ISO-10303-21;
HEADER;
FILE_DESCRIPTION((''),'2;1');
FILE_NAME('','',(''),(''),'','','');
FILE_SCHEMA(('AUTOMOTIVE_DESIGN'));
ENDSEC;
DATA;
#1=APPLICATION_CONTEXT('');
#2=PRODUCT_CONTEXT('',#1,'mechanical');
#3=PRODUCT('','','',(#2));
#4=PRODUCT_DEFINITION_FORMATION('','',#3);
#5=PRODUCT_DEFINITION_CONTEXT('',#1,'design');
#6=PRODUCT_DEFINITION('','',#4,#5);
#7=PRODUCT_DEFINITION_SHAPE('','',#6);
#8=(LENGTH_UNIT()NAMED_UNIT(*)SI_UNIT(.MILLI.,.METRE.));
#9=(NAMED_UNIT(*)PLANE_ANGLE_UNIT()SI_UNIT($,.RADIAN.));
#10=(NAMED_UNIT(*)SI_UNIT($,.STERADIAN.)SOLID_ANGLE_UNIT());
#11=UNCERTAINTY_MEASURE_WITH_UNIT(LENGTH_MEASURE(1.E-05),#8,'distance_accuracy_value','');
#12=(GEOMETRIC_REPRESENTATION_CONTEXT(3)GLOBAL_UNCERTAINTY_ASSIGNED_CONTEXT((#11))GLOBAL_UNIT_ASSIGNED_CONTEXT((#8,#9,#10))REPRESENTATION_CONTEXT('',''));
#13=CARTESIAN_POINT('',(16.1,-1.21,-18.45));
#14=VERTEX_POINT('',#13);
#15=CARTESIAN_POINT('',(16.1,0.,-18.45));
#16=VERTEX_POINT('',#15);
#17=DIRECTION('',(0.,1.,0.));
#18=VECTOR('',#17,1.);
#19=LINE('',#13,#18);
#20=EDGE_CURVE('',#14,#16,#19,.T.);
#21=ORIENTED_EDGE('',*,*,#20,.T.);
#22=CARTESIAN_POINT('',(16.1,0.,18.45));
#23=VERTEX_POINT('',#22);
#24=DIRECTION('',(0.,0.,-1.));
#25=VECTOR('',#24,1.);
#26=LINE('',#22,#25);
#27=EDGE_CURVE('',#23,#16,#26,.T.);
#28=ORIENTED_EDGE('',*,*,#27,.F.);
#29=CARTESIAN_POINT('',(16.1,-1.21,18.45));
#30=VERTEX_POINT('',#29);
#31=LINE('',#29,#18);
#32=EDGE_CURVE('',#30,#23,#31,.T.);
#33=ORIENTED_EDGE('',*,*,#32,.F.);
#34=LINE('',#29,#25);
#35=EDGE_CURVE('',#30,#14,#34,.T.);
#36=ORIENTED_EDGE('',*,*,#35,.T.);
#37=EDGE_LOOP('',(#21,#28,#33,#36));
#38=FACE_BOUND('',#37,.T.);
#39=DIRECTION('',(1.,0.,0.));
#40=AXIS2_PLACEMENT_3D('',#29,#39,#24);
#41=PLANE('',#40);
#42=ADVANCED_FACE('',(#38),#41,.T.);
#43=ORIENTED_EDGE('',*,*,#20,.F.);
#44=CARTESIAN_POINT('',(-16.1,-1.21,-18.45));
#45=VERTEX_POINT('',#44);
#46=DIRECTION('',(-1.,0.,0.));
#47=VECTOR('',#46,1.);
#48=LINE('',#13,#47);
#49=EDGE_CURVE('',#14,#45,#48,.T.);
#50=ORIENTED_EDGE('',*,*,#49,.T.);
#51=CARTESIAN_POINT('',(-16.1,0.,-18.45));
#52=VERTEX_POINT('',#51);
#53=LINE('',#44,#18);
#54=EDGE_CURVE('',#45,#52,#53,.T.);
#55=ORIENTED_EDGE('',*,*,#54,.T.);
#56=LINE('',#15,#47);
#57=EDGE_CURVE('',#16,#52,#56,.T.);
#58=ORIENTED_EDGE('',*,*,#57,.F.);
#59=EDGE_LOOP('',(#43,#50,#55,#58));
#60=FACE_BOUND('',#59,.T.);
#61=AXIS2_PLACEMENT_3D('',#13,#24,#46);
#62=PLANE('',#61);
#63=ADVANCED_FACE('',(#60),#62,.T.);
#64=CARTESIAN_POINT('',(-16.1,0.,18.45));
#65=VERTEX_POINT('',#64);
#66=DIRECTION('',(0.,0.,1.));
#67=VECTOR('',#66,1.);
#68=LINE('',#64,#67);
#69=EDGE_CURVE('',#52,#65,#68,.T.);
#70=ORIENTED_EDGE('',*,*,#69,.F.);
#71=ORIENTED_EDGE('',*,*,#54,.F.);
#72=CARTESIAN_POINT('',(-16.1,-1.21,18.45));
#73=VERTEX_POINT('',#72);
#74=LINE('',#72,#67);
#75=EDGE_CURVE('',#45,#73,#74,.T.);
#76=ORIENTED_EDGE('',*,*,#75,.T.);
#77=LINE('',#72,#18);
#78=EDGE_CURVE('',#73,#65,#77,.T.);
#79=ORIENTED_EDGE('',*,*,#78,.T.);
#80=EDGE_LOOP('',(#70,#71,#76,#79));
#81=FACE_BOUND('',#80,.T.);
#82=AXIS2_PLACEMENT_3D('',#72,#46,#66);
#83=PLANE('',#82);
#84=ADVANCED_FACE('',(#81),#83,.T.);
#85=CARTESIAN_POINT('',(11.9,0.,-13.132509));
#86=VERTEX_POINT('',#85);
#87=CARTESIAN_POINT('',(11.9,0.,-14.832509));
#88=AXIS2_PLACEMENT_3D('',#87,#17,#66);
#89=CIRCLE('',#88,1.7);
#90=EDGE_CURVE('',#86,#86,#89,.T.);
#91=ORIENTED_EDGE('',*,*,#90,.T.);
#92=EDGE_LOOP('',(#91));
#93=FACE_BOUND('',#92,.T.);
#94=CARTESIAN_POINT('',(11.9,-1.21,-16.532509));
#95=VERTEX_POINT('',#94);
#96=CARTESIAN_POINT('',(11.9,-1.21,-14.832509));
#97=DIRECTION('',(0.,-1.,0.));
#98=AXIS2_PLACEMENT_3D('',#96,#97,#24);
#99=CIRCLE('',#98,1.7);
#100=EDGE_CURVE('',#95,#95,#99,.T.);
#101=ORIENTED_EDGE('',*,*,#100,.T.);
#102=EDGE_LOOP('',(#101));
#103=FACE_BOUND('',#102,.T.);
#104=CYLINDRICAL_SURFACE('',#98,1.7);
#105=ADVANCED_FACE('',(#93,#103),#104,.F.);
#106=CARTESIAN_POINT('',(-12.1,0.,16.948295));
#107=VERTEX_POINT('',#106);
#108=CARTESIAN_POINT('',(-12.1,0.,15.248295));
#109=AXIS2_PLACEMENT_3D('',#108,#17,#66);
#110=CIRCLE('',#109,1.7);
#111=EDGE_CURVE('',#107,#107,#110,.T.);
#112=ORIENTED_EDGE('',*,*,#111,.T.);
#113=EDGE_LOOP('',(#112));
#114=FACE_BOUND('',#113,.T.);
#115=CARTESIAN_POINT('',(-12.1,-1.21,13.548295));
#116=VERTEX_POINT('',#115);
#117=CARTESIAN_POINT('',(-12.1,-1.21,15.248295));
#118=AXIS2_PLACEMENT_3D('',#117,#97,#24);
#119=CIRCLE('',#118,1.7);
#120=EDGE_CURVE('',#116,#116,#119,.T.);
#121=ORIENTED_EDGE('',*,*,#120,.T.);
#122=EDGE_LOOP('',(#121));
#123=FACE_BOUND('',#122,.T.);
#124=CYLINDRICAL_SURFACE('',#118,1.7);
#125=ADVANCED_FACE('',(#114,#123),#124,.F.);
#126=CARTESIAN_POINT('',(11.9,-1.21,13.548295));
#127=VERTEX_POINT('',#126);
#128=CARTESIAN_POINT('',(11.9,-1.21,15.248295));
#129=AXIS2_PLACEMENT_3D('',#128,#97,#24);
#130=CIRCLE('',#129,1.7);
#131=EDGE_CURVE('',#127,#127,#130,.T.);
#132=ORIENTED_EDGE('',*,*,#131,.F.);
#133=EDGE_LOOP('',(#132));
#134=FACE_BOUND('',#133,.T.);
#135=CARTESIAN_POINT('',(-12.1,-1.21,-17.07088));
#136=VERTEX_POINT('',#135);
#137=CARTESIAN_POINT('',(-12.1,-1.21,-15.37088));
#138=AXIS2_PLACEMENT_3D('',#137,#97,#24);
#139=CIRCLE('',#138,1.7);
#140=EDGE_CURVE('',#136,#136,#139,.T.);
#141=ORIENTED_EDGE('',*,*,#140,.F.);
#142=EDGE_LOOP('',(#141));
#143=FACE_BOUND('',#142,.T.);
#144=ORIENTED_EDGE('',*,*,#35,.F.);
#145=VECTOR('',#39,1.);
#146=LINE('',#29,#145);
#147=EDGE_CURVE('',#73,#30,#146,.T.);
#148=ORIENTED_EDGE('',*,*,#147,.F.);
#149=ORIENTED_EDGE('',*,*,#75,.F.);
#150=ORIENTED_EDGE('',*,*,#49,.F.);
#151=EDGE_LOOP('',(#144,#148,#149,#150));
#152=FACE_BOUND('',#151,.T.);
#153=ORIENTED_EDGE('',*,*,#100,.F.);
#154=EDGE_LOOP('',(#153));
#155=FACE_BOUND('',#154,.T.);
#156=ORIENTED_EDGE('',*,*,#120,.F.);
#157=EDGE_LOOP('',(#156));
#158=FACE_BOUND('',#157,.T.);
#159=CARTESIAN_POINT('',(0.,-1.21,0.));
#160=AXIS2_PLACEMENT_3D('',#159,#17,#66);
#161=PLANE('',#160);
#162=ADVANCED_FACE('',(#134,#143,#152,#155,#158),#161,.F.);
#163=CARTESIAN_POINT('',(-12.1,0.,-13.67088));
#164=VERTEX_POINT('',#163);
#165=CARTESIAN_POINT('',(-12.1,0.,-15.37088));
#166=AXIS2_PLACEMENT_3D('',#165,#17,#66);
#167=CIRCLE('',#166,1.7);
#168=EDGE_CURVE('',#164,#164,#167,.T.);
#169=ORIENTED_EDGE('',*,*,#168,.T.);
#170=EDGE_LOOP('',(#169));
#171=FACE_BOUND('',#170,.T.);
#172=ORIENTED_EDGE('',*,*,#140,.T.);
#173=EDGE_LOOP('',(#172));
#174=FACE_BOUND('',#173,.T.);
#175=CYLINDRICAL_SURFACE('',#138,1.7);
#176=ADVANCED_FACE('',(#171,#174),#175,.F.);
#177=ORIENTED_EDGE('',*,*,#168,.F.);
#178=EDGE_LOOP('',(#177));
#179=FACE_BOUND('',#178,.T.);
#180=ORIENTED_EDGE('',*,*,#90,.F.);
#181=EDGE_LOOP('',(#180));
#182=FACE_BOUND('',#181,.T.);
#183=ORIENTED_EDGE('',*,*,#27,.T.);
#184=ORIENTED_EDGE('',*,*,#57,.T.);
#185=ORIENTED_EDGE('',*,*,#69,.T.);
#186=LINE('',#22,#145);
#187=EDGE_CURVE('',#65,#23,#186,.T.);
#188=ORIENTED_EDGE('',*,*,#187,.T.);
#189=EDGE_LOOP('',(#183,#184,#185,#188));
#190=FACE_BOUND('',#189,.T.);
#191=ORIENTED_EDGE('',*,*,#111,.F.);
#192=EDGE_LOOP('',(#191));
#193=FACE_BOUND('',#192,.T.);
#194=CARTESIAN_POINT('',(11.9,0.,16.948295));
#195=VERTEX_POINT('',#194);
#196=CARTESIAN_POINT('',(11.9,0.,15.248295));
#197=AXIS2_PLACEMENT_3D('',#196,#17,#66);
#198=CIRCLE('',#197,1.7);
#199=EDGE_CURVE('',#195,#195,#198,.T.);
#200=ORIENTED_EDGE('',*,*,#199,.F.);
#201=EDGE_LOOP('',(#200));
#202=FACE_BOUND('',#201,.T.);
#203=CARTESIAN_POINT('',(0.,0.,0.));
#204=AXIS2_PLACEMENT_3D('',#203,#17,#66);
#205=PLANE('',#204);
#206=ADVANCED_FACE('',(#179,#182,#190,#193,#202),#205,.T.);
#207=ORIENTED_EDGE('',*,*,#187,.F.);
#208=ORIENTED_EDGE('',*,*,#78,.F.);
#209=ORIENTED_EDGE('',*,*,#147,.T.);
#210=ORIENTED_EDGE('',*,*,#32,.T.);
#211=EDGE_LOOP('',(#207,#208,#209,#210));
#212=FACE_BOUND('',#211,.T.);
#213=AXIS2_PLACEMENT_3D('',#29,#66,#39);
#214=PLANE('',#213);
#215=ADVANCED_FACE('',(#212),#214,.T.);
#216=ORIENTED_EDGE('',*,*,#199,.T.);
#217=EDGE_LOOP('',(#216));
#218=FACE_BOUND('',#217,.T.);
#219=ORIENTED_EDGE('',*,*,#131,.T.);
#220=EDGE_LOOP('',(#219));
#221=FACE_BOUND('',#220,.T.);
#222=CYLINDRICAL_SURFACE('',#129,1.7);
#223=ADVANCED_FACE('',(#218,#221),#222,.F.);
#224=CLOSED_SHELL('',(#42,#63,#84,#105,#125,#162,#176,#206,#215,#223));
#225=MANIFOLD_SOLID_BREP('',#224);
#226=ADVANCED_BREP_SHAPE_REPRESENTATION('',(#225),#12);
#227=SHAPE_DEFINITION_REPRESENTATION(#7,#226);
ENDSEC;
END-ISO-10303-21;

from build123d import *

# Parameters (mm, degrees)
SKETCH1_W                = 32.2
SKETCH1_H                = 36.9
BASE_FLANGE1_DEPTH       = 1.21
M3_CLEARANCE_HOLE1_D     = 3.4
M3_CLEARANCE_HOLE1_DEPTH = 3.34
M3_CLEARANCE_HOLE1_TIP   = 1.021463052


# Sheet-metal steps are written as plain solids
with BuildPart() as part:
    # Sketch1 → Base-Flange1 (new body)
    with BuildSketch(Plane(origin=(0, 0, 0), x_dir=(1, 0, 0), z_dir=(0, 1, 0))):
        Rectangle(SKETCH1_W, SKETCH1_H)
    extrude(amount=-BASE_FLANGE1_DEPTH)

    # M3 Clearance Hole1
    with Locations(Plane(origin=(0, -1.21, 0), x_dir=(-1, 0, 0), z_dir=(0, -1, 0))):
        with Locations((-11.9, -15.248294706), (12.1, -15.248294706), (12.1, 15.370879883), (-11.9, 14.832508941)):
            Hole(M3_CLEARANCE_HOLE1_D / 2, depth=M3_CLEARANCE_HOLE1_DEPTH)
            with Locations((0, 0, -(M3_CLEARANCE_HOLE1_DEPTH + M3_CLEARANCE_HOLE1_TIP / 2))):  # 118° drill point
                Cone(0, M3_CLEARANCE_HOLE1_D / 2, M3_CLEARANCE_HOLE1_TIP, mode=Mode.SUBTRACT)


solid = part.part
